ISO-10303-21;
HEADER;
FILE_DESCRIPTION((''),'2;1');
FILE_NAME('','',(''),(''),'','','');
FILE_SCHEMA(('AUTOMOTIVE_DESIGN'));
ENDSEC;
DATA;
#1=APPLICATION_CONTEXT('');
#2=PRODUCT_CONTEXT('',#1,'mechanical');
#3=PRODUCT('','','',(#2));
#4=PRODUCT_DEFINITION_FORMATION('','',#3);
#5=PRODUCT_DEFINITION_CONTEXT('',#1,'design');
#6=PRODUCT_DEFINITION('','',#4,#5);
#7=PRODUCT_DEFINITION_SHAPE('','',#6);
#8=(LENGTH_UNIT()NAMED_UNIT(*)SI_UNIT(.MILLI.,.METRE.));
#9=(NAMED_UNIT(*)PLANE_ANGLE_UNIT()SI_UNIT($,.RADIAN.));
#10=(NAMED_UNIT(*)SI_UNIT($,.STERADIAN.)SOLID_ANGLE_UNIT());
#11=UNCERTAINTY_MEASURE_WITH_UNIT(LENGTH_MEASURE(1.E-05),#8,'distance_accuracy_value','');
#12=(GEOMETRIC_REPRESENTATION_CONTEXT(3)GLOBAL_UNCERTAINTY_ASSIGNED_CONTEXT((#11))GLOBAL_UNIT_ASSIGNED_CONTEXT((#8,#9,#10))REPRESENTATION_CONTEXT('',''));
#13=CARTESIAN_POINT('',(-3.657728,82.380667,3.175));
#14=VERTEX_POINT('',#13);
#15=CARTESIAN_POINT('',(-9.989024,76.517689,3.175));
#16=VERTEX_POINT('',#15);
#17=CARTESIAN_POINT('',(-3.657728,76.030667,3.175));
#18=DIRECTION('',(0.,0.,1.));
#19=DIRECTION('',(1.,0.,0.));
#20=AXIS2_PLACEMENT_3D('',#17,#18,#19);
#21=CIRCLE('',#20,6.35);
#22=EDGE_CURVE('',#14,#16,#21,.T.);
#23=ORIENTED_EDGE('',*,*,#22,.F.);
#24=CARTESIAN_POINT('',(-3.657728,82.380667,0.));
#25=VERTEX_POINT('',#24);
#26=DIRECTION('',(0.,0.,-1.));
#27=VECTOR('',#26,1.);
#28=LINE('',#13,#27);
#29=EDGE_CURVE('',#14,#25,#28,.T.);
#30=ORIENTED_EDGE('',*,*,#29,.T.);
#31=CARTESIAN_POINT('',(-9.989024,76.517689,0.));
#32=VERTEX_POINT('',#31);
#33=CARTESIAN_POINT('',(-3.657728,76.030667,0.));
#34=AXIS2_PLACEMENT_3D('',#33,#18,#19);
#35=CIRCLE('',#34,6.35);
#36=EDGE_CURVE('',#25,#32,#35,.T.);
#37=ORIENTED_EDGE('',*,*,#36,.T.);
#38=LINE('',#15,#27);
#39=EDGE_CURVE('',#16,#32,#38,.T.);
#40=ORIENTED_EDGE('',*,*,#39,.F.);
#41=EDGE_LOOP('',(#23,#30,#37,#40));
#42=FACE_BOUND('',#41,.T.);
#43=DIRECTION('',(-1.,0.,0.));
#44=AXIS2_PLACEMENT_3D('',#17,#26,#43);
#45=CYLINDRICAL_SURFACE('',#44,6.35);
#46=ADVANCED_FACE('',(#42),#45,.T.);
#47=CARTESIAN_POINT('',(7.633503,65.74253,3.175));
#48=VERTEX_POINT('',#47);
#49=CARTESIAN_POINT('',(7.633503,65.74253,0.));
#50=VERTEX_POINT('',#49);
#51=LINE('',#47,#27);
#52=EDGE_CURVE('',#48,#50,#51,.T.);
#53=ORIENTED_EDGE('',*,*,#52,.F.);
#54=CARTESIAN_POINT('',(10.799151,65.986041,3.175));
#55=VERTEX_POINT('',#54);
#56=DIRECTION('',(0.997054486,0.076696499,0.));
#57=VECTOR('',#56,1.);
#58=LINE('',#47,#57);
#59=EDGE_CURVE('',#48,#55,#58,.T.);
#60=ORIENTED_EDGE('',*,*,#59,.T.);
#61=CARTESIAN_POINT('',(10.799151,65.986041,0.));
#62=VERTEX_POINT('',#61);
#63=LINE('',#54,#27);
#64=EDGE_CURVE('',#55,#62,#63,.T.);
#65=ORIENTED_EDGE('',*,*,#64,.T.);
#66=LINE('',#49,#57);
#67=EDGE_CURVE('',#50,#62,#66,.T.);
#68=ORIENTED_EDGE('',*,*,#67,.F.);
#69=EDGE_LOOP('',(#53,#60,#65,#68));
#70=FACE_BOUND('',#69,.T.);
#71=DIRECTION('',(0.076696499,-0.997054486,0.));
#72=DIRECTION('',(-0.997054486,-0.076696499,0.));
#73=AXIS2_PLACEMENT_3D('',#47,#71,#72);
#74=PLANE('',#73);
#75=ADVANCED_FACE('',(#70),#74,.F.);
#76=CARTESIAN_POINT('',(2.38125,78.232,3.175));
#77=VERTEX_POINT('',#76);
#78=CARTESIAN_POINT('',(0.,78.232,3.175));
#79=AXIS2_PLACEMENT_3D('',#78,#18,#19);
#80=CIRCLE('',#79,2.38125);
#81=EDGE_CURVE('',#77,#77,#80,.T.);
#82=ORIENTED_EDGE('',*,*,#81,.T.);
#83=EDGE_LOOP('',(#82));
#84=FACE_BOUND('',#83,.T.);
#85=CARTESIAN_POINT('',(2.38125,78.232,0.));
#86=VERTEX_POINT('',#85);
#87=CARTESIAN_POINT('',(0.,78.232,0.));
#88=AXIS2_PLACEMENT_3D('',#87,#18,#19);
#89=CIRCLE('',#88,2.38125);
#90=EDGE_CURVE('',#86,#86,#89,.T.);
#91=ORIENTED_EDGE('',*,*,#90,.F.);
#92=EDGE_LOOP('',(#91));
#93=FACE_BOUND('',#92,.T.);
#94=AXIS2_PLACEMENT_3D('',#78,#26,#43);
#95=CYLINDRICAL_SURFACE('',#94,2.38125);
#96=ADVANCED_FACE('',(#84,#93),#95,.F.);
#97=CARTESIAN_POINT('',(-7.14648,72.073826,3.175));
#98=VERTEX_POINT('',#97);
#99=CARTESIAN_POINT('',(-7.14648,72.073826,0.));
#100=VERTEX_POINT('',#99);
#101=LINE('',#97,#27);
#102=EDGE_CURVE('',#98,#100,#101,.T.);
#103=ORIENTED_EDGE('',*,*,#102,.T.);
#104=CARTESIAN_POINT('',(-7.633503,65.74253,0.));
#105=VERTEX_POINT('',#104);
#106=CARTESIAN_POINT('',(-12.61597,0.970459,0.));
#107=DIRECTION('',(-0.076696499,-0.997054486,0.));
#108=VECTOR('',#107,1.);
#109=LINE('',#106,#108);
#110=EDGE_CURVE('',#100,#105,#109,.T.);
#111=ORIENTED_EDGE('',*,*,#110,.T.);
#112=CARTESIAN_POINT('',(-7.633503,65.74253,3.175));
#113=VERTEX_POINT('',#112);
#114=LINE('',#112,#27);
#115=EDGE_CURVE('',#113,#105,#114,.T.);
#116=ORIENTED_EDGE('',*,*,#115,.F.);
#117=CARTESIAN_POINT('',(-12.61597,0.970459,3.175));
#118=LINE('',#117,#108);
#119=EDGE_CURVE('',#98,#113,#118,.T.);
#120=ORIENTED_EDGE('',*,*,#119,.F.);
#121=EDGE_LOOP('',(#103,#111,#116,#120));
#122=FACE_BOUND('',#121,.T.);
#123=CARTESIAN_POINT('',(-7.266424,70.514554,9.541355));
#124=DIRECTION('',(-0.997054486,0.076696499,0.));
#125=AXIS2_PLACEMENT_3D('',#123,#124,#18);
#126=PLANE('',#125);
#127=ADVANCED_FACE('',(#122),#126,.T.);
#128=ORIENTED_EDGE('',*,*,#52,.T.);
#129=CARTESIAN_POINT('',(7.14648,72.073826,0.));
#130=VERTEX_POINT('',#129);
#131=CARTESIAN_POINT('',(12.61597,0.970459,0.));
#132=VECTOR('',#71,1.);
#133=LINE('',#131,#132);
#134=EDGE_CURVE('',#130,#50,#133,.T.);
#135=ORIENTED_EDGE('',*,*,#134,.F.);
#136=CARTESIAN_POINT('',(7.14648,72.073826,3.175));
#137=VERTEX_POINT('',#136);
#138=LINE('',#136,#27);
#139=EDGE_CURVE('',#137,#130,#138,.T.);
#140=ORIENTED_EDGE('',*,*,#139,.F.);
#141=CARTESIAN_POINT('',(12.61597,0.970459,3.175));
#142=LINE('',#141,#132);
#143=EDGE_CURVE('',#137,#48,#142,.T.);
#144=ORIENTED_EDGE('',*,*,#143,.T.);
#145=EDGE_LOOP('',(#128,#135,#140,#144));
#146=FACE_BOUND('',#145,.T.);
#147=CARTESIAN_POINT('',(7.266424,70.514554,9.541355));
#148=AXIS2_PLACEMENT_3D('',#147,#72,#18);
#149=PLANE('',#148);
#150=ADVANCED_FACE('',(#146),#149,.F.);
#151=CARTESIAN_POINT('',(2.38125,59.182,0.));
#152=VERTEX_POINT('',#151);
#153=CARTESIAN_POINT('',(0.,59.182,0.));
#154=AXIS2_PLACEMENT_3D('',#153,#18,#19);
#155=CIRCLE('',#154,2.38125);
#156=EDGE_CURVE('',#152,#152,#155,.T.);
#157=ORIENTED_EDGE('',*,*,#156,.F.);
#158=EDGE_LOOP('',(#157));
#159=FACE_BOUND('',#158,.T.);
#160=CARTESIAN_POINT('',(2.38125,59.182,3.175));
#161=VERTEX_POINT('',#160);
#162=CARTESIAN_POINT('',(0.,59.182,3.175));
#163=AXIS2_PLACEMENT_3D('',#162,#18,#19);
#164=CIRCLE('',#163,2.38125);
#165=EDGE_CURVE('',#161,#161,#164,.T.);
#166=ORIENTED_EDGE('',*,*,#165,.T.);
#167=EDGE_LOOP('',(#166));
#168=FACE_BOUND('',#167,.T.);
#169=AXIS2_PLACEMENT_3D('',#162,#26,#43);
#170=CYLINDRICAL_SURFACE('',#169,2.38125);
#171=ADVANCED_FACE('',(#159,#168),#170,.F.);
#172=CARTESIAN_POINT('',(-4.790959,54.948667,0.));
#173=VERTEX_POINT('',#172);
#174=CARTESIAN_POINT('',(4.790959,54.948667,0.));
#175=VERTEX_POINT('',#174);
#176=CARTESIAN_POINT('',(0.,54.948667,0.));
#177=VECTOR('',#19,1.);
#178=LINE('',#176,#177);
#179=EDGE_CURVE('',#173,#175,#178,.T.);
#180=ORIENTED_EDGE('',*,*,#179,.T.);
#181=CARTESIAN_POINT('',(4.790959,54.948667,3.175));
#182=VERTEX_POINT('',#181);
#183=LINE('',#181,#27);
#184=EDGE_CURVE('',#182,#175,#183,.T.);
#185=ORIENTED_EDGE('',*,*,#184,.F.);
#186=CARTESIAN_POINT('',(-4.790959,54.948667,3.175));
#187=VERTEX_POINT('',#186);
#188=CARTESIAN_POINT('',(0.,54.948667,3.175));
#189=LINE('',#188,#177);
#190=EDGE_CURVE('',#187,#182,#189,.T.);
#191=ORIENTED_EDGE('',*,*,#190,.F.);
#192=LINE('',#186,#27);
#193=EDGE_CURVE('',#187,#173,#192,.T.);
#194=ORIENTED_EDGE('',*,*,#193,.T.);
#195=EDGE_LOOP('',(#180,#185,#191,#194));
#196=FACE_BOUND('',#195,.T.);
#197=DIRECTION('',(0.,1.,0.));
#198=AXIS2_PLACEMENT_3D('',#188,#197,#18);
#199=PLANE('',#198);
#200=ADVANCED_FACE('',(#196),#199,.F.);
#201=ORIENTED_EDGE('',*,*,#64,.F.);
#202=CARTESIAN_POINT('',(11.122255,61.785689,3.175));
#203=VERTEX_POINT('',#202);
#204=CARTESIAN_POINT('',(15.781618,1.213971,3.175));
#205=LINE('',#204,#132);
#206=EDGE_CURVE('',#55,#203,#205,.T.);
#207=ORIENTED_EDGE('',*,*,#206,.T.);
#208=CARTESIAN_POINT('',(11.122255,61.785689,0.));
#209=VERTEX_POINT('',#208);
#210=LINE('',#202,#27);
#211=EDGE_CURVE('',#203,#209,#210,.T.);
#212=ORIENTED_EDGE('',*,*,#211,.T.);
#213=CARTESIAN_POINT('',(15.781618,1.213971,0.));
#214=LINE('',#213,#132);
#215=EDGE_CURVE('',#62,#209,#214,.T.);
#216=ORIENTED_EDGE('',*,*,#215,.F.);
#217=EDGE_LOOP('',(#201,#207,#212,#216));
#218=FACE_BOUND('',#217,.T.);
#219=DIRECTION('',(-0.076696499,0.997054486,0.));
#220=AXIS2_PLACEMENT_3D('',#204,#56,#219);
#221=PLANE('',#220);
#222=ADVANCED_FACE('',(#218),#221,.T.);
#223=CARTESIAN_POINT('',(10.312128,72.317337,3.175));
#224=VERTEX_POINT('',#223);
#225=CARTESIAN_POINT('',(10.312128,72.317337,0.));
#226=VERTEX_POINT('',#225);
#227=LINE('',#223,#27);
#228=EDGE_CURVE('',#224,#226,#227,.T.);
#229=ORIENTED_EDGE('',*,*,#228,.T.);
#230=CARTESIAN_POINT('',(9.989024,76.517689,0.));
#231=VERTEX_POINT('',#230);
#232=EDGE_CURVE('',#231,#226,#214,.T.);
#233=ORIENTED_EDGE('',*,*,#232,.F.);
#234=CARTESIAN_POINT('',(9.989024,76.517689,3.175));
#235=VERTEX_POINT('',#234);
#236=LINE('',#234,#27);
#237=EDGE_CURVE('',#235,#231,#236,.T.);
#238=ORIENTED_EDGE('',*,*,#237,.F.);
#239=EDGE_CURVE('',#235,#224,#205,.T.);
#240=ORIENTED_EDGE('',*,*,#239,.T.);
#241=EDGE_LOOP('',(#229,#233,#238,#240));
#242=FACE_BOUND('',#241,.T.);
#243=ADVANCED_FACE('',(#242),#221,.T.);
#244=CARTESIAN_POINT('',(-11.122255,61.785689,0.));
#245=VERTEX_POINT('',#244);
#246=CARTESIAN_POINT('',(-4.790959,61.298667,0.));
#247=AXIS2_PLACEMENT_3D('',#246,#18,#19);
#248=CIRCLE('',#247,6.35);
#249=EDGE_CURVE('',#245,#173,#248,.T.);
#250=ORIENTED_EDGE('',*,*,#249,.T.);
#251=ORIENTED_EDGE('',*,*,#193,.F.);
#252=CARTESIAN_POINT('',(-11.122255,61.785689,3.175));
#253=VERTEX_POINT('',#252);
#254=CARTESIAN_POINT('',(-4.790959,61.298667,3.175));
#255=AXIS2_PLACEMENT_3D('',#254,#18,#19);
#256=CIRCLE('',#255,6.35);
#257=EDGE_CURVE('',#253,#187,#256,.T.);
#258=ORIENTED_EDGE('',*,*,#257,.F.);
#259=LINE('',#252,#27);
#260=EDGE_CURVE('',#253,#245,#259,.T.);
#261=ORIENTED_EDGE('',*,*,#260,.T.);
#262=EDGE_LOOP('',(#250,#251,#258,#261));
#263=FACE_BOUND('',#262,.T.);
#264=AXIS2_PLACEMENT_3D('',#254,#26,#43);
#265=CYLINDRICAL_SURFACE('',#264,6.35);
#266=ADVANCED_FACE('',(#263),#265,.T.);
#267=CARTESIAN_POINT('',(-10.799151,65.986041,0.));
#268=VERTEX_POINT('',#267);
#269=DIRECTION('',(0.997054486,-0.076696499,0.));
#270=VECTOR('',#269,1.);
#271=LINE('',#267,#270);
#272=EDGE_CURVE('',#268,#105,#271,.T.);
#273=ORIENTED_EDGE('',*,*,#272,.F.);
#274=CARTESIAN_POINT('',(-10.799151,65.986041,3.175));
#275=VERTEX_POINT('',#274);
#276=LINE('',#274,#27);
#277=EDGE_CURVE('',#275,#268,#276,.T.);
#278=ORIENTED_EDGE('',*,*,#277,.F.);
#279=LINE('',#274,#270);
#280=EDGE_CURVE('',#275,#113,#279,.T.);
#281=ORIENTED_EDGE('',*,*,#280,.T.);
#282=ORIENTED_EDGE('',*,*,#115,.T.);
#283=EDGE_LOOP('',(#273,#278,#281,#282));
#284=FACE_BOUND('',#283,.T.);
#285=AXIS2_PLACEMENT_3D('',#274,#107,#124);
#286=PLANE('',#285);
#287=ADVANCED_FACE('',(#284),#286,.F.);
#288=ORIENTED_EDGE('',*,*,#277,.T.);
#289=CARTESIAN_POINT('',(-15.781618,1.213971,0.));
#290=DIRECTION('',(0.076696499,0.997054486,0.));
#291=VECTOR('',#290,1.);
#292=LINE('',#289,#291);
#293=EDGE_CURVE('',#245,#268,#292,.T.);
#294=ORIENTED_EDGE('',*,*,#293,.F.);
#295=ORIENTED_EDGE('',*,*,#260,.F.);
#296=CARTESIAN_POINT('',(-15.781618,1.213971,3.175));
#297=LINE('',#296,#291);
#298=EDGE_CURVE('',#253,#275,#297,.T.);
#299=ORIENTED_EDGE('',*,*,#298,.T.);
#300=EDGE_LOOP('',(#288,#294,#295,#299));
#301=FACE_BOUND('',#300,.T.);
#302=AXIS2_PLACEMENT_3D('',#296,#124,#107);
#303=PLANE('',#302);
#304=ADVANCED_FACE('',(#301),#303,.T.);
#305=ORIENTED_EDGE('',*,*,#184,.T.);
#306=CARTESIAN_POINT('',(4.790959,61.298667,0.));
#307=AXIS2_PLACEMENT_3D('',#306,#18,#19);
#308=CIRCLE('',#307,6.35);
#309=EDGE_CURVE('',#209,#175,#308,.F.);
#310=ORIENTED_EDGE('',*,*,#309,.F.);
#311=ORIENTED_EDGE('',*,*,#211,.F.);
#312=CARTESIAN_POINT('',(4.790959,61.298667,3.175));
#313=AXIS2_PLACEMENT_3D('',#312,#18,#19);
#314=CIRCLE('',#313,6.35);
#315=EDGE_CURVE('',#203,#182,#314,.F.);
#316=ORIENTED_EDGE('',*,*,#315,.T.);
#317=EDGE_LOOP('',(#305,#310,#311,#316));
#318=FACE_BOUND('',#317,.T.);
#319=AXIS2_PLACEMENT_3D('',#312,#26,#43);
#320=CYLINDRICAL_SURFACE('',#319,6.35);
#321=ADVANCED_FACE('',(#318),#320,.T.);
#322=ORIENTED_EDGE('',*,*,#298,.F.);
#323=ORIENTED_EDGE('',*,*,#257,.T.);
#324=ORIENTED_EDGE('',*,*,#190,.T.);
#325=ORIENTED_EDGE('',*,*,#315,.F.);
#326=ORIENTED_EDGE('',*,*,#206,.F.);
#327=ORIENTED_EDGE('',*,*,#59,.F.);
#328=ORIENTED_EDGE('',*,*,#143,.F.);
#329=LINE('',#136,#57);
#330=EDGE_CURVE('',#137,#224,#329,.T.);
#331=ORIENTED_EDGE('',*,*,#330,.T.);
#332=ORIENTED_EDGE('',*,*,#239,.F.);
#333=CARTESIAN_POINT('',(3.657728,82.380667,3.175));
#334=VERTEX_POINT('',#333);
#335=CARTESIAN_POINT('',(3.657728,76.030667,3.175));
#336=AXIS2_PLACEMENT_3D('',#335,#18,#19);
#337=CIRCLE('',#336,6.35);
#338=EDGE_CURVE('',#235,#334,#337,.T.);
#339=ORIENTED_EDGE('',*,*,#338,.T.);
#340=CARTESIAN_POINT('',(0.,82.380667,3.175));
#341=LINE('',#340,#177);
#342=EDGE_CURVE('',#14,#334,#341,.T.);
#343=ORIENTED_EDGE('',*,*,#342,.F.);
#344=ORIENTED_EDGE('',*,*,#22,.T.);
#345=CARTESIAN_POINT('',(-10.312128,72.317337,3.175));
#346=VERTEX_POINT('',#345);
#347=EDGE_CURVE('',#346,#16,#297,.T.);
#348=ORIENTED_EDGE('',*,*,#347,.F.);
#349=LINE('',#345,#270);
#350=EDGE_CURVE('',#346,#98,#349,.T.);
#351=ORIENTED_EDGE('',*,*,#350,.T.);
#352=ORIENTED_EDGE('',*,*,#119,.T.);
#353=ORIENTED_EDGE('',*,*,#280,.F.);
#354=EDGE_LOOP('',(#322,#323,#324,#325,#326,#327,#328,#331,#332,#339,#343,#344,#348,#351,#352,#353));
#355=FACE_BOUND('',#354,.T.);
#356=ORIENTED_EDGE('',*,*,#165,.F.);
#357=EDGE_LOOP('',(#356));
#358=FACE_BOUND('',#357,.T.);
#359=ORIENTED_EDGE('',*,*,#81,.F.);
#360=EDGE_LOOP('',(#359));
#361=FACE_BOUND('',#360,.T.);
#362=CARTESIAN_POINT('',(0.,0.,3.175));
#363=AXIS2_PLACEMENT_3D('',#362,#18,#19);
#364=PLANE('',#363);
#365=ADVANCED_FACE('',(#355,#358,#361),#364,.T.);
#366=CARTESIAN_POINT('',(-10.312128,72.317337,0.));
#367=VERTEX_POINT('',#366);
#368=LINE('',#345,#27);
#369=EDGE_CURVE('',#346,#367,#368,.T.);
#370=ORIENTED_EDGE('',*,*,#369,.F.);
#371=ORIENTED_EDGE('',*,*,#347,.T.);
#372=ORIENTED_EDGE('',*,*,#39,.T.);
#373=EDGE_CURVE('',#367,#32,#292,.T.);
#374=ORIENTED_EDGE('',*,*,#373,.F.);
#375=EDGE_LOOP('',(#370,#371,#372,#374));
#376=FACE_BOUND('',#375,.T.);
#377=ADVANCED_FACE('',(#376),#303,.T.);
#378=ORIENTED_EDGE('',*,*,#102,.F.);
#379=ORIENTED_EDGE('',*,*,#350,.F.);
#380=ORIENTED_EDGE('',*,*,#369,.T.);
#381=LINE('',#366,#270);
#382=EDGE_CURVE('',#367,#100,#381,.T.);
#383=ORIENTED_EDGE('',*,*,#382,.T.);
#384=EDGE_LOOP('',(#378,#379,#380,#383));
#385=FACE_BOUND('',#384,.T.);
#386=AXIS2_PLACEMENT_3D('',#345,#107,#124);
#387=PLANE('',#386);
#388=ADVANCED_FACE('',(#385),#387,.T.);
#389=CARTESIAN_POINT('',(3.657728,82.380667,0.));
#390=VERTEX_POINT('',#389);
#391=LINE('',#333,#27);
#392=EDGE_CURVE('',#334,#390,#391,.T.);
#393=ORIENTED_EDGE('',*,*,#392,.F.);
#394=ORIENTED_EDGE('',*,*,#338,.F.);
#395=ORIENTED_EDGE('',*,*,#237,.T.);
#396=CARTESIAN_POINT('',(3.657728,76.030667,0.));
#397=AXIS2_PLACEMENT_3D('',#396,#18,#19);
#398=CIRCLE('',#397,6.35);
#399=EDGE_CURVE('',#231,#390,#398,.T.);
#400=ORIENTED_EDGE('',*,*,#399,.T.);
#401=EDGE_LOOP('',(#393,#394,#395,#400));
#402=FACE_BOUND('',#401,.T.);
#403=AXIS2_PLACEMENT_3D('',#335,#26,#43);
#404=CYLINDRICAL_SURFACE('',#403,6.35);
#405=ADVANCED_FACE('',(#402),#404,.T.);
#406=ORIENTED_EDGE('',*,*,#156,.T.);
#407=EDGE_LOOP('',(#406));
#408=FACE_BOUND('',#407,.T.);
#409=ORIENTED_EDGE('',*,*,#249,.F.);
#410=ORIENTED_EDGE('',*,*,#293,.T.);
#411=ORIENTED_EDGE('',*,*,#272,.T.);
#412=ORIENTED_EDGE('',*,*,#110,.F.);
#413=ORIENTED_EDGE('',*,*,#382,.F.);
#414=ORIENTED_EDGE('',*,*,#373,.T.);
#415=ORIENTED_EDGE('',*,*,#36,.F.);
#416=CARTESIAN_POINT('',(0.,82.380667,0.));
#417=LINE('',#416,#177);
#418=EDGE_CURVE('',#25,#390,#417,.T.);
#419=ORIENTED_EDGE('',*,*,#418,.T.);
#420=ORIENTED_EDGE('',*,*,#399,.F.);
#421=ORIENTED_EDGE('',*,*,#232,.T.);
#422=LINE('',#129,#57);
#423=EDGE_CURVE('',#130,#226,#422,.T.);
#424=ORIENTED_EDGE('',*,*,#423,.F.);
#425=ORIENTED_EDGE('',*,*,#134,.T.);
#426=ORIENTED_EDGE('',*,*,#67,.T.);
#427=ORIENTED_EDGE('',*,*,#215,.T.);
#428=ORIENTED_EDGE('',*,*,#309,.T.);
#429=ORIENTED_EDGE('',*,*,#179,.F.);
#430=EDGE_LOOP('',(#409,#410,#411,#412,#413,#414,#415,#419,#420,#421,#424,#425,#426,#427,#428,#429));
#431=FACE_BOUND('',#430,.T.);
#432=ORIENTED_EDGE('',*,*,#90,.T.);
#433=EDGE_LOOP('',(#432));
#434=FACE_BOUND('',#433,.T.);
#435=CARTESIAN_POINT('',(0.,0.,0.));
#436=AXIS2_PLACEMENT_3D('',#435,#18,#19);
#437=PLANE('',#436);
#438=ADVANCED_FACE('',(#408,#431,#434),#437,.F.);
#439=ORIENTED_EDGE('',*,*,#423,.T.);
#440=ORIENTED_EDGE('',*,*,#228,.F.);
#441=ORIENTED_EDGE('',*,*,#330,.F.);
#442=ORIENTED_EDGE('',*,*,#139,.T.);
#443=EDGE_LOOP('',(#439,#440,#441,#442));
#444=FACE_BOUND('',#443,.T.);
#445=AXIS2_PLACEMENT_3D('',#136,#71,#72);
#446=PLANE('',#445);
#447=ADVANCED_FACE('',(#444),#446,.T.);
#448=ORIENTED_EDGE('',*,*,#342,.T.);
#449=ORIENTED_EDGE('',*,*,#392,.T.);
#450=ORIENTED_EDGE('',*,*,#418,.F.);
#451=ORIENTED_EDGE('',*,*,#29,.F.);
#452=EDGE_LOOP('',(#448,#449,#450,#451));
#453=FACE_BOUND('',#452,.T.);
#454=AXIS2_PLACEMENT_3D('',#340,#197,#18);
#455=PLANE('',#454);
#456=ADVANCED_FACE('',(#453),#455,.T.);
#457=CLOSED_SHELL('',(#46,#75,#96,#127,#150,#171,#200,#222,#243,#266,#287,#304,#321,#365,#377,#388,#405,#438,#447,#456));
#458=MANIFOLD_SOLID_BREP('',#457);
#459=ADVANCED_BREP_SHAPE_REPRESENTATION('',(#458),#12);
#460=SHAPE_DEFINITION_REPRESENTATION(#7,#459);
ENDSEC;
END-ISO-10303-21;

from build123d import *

# Parameters (mm, degrees)
BOSS_EXTRUDE1_DEPTH = 3.175
CAVITY1_DEPTH       = 3.175


# Read off the part's stored shape, not the designer's step: Cavity1
with BuildPart() as part:
    # Sketch1 → Boss-Extrude1 (new body)
    with BuildSketch(Plane.XY):
        with BuildLine():
            Line((0, 80.613250085), (0, 82.380666667))
            Line((0, 82.380666667), (-3.657727907, 82.380666667))
            ThreePointArc((-3.657727907, 82.380666667), (-7.972232828, 80.689802562), (-9.98902389, 76.517689435))
            Line((-9.98902389, 76.517689435), (-11.122254659, 61.785689435))
            ThreePointArc((-11.122254659, 61.785689435), (-9.450094571, 56.984161746), (-4.790958676, 54.948666667))
            Line((-4.790958676, 54.948666667), (0, 54.948666667))
            Line((0, 54.948666667), (0, 56.800750085))
            ThreePointArc((0, 56.800750085), (-2.38125, 59.182000085), (0, 61.563250085))
            Line((0, 61.563250085), (0, 75.850750085))
            ThreePointArc((0, 75.850750085), (-2.38125, 78.232000085), (0, 80.613250085))
        make_face()
        with BuildLine():
            Line((11.122254659, 61.785689435), (9.98902389, 76.517689435))
            ThreePointArc((9.98902389, 76.517689435), (7.972232828, 80.689802562), (3.657727907, 82.380666667))
            Line((3.657727907, 82.380666667), (0, 82.380666667))
            Line((0, 82.380666667), (0, 80.613250085))
            ThreePointArc((0, 80.613250085), (1.683798023, 79.915798107), (2.38125, 78.232000085))
            ThreePointArc((2.38125, 78.232000085), (1.683798023, 76.548202062), (0, 75.850750085))
            Line((0, 75.850750085), (0, 61.563250085))
            ThreePointArc((0, 61.563250085), (1.683798023, 60.865798107), (2.38125, 59.182000085))
            ThreePointArc((2.38125, 59.182000085), (1.683798023, 57.498202062), (0, 56.800750085))
            Line((0, 56.800750085), (0, 54.948666667))
            Line((0, 54.948666667), (4.790958676, 54.948666667))
            ThreePointArc((4.790958676, 54.948666667), (9.450094571, 56.984161746), (11.122254659, 61.785689435))
        make_face()
    extrude(amount=BOSS_EXTRUDE1_DEPTH)

    # Cavity1 outline → Cavity1 (cut)
    with BuildSketch(Plane.XY):
        Polygon((-7.633502667, 65.742530059), (-7.146479899, 72.073826042), (-10.31212789, 72.317337426), (-10.799150658, 65.986041443), align=None)
        Polygon((10.31212789, 72.317337426), (7.146479899, 72.073826042), (7.633502667, 65.742530059), (10.799150658, 65.986041443), align=None)
    extrude(amount=CAVITY1_DEPTH, mode=Mode.SUBTRACT)


solid = part.part
